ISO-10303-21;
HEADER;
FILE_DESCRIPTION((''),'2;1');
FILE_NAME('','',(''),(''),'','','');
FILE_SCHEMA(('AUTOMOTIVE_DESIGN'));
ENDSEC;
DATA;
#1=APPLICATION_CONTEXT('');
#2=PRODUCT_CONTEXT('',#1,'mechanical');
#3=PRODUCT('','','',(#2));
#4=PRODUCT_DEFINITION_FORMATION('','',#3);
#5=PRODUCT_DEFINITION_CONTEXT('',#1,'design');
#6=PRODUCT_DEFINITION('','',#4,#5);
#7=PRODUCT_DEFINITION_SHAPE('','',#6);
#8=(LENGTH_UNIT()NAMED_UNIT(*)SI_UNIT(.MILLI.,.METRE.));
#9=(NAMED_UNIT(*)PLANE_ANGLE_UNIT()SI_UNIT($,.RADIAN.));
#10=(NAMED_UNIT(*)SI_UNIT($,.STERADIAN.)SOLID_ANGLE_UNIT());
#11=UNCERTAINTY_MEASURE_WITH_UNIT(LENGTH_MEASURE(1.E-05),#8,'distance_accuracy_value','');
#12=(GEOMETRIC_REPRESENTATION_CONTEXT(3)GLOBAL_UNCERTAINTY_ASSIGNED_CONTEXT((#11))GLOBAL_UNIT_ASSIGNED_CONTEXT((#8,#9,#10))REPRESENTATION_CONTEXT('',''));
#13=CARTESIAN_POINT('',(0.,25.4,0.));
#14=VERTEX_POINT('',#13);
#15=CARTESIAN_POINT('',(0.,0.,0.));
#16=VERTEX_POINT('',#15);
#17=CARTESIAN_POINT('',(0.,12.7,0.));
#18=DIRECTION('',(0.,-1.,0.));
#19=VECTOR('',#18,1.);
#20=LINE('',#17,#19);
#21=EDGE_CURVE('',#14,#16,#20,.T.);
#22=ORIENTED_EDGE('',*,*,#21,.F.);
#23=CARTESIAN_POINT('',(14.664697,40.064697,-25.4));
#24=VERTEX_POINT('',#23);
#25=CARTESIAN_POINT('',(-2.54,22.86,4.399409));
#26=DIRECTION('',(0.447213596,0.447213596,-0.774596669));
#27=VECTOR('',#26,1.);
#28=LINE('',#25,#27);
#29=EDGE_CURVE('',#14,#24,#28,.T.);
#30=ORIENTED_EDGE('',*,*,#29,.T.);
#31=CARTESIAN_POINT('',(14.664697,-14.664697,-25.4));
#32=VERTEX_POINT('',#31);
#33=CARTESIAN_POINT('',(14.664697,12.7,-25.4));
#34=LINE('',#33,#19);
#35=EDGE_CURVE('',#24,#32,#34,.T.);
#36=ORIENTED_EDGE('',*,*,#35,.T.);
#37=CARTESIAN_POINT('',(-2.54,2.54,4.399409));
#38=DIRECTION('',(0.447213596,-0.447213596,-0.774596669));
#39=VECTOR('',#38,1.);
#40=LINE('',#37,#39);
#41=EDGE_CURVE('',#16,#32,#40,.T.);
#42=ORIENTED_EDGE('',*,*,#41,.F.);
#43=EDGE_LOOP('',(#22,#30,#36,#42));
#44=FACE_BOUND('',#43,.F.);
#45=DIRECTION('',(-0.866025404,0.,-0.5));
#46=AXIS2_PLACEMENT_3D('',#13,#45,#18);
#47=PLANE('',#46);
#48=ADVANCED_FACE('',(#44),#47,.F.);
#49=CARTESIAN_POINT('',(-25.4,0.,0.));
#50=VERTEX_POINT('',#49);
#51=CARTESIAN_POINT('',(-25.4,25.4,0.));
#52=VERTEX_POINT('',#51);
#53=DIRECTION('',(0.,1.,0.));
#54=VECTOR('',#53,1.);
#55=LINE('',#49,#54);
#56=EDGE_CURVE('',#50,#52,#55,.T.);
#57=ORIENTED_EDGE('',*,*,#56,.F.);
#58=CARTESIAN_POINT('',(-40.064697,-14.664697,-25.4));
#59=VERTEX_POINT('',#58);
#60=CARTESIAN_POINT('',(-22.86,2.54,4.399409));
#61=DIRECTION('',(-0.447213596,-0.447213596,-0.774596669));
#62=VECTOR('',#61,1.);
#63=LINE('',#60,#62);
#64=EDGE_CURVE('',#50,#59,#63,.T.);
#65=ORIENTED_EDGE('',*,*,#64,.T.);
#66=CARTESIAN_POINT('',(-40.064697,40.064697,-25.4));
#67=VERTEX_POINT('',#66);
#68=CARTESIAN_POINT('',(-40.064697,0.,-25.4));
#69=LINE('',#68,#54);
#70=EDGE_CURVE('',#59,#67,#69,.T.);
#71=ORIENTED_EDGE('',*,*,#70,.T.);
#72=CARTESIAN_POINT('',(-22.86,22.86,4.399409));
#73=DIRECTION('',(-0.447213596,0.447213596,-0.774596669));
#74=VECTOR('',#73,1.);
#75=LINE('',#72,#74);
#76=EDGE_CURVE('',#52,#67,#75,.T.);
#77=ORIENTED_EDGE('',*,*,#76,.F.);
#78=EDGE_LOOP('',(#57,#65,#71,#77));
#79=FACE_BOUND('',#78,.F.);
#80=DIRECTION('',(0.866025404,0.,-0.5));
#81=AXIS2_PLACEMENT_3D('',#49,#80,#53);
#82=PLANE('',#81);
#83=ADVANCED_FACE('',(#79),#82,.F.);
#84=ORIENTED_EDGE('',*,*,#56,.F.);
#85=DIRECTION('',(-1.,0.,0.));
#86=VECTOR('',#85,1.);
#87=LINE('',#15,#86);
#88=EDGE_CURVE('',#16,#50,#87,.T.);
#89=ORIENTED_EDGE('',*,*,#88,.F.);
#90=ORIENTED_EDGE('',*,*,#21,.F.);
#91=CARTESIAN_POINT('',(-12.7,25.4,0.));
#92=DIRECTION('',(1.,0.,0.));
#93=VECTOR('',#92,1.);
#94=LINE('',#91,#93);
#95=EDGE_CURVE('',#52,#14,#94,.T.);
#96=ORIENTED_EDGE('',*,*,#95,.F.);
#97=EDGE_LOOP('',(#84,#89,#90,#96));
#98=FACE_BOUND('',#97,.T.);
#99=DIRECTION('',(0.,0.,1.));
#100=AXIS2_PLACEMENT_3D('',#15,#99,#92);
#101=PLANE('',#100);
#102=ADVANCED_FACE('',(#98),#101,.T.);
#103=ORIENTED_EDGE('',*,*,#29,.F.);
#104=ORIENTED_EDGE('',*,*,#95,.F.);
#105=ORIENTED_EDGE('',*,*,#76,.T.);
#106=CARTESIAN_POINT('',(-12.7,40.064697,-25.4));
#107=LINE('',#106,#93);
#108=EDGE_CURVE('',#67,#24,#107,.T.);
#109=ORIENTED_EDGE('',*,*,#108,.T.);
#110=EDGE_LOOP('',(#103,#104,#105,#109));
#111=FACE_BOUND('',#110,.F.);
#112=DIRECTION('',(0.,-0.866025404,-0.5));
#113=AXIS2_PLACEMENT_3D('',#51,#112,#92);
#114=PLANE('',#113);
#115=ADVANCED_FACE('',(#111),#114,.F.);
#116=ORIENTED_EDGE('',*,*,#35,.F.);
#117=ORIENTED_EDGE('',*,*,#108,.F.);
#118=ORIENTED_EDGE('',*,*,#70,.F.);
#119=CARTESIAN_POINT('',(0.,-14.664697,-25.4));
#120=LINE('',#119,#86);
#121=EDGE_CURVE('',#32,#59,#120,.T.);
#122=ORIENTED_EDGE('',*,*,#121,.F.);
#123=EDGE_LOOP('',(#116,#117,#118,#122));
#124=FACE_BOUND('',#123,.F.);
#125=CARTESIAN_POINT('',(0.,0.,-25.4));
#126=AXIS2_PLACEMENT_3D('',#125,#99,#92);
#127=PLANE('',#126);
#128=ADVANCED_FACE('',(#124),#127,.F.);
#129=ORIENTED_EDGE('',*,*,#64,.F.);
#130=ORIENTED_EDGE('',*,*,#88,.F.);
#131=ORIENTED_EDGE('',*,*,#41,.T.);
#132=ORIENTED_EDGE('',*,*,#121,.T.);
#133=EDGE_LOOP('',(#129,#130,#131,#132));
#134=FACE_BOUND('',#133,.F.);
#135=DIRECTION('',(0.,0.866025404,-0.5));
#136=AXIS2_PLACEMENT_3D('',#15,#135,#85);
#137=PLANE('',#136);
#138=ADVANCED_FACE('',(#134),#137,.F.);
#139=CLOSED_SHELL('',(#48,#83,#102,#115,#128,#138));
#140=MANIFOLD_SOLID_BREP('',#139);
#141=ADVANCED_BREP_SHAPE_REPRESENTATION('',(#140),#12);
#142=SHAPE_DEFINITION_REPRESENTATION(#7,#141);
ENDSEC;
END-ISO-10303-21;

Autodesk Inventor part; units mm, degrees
ref_plane "YZ Plane" through (0, 0, 0) normal (1, 0, 0) x (0, 1, 0)
ref_plane "XZ Plane" through (0, 0, 0) normal (0, 1, 0) x (-1, 0, 0)
ref_plane "XY Plane" through (0, 0, 0) normal (0, 0, 1) x (1, 0, 0)
sketch "Sketch1" plane through (0, 0, 0) normal (0, 0, 1) x (1, 0, 0)
  line L0 (0, 0) -> (-25.4, 0)
  line L1 (-25.4, 0) -> (-25.4, 25.4)
  line L2 (-25.4, 25.4) -> (0, 25.4)
  line L3 (0, 25.4) -> (0, 0)
extrude "Extrusion1" add sketch "Sketch1" against normal blind 25.4 draft 30
properties part number "Taper"
